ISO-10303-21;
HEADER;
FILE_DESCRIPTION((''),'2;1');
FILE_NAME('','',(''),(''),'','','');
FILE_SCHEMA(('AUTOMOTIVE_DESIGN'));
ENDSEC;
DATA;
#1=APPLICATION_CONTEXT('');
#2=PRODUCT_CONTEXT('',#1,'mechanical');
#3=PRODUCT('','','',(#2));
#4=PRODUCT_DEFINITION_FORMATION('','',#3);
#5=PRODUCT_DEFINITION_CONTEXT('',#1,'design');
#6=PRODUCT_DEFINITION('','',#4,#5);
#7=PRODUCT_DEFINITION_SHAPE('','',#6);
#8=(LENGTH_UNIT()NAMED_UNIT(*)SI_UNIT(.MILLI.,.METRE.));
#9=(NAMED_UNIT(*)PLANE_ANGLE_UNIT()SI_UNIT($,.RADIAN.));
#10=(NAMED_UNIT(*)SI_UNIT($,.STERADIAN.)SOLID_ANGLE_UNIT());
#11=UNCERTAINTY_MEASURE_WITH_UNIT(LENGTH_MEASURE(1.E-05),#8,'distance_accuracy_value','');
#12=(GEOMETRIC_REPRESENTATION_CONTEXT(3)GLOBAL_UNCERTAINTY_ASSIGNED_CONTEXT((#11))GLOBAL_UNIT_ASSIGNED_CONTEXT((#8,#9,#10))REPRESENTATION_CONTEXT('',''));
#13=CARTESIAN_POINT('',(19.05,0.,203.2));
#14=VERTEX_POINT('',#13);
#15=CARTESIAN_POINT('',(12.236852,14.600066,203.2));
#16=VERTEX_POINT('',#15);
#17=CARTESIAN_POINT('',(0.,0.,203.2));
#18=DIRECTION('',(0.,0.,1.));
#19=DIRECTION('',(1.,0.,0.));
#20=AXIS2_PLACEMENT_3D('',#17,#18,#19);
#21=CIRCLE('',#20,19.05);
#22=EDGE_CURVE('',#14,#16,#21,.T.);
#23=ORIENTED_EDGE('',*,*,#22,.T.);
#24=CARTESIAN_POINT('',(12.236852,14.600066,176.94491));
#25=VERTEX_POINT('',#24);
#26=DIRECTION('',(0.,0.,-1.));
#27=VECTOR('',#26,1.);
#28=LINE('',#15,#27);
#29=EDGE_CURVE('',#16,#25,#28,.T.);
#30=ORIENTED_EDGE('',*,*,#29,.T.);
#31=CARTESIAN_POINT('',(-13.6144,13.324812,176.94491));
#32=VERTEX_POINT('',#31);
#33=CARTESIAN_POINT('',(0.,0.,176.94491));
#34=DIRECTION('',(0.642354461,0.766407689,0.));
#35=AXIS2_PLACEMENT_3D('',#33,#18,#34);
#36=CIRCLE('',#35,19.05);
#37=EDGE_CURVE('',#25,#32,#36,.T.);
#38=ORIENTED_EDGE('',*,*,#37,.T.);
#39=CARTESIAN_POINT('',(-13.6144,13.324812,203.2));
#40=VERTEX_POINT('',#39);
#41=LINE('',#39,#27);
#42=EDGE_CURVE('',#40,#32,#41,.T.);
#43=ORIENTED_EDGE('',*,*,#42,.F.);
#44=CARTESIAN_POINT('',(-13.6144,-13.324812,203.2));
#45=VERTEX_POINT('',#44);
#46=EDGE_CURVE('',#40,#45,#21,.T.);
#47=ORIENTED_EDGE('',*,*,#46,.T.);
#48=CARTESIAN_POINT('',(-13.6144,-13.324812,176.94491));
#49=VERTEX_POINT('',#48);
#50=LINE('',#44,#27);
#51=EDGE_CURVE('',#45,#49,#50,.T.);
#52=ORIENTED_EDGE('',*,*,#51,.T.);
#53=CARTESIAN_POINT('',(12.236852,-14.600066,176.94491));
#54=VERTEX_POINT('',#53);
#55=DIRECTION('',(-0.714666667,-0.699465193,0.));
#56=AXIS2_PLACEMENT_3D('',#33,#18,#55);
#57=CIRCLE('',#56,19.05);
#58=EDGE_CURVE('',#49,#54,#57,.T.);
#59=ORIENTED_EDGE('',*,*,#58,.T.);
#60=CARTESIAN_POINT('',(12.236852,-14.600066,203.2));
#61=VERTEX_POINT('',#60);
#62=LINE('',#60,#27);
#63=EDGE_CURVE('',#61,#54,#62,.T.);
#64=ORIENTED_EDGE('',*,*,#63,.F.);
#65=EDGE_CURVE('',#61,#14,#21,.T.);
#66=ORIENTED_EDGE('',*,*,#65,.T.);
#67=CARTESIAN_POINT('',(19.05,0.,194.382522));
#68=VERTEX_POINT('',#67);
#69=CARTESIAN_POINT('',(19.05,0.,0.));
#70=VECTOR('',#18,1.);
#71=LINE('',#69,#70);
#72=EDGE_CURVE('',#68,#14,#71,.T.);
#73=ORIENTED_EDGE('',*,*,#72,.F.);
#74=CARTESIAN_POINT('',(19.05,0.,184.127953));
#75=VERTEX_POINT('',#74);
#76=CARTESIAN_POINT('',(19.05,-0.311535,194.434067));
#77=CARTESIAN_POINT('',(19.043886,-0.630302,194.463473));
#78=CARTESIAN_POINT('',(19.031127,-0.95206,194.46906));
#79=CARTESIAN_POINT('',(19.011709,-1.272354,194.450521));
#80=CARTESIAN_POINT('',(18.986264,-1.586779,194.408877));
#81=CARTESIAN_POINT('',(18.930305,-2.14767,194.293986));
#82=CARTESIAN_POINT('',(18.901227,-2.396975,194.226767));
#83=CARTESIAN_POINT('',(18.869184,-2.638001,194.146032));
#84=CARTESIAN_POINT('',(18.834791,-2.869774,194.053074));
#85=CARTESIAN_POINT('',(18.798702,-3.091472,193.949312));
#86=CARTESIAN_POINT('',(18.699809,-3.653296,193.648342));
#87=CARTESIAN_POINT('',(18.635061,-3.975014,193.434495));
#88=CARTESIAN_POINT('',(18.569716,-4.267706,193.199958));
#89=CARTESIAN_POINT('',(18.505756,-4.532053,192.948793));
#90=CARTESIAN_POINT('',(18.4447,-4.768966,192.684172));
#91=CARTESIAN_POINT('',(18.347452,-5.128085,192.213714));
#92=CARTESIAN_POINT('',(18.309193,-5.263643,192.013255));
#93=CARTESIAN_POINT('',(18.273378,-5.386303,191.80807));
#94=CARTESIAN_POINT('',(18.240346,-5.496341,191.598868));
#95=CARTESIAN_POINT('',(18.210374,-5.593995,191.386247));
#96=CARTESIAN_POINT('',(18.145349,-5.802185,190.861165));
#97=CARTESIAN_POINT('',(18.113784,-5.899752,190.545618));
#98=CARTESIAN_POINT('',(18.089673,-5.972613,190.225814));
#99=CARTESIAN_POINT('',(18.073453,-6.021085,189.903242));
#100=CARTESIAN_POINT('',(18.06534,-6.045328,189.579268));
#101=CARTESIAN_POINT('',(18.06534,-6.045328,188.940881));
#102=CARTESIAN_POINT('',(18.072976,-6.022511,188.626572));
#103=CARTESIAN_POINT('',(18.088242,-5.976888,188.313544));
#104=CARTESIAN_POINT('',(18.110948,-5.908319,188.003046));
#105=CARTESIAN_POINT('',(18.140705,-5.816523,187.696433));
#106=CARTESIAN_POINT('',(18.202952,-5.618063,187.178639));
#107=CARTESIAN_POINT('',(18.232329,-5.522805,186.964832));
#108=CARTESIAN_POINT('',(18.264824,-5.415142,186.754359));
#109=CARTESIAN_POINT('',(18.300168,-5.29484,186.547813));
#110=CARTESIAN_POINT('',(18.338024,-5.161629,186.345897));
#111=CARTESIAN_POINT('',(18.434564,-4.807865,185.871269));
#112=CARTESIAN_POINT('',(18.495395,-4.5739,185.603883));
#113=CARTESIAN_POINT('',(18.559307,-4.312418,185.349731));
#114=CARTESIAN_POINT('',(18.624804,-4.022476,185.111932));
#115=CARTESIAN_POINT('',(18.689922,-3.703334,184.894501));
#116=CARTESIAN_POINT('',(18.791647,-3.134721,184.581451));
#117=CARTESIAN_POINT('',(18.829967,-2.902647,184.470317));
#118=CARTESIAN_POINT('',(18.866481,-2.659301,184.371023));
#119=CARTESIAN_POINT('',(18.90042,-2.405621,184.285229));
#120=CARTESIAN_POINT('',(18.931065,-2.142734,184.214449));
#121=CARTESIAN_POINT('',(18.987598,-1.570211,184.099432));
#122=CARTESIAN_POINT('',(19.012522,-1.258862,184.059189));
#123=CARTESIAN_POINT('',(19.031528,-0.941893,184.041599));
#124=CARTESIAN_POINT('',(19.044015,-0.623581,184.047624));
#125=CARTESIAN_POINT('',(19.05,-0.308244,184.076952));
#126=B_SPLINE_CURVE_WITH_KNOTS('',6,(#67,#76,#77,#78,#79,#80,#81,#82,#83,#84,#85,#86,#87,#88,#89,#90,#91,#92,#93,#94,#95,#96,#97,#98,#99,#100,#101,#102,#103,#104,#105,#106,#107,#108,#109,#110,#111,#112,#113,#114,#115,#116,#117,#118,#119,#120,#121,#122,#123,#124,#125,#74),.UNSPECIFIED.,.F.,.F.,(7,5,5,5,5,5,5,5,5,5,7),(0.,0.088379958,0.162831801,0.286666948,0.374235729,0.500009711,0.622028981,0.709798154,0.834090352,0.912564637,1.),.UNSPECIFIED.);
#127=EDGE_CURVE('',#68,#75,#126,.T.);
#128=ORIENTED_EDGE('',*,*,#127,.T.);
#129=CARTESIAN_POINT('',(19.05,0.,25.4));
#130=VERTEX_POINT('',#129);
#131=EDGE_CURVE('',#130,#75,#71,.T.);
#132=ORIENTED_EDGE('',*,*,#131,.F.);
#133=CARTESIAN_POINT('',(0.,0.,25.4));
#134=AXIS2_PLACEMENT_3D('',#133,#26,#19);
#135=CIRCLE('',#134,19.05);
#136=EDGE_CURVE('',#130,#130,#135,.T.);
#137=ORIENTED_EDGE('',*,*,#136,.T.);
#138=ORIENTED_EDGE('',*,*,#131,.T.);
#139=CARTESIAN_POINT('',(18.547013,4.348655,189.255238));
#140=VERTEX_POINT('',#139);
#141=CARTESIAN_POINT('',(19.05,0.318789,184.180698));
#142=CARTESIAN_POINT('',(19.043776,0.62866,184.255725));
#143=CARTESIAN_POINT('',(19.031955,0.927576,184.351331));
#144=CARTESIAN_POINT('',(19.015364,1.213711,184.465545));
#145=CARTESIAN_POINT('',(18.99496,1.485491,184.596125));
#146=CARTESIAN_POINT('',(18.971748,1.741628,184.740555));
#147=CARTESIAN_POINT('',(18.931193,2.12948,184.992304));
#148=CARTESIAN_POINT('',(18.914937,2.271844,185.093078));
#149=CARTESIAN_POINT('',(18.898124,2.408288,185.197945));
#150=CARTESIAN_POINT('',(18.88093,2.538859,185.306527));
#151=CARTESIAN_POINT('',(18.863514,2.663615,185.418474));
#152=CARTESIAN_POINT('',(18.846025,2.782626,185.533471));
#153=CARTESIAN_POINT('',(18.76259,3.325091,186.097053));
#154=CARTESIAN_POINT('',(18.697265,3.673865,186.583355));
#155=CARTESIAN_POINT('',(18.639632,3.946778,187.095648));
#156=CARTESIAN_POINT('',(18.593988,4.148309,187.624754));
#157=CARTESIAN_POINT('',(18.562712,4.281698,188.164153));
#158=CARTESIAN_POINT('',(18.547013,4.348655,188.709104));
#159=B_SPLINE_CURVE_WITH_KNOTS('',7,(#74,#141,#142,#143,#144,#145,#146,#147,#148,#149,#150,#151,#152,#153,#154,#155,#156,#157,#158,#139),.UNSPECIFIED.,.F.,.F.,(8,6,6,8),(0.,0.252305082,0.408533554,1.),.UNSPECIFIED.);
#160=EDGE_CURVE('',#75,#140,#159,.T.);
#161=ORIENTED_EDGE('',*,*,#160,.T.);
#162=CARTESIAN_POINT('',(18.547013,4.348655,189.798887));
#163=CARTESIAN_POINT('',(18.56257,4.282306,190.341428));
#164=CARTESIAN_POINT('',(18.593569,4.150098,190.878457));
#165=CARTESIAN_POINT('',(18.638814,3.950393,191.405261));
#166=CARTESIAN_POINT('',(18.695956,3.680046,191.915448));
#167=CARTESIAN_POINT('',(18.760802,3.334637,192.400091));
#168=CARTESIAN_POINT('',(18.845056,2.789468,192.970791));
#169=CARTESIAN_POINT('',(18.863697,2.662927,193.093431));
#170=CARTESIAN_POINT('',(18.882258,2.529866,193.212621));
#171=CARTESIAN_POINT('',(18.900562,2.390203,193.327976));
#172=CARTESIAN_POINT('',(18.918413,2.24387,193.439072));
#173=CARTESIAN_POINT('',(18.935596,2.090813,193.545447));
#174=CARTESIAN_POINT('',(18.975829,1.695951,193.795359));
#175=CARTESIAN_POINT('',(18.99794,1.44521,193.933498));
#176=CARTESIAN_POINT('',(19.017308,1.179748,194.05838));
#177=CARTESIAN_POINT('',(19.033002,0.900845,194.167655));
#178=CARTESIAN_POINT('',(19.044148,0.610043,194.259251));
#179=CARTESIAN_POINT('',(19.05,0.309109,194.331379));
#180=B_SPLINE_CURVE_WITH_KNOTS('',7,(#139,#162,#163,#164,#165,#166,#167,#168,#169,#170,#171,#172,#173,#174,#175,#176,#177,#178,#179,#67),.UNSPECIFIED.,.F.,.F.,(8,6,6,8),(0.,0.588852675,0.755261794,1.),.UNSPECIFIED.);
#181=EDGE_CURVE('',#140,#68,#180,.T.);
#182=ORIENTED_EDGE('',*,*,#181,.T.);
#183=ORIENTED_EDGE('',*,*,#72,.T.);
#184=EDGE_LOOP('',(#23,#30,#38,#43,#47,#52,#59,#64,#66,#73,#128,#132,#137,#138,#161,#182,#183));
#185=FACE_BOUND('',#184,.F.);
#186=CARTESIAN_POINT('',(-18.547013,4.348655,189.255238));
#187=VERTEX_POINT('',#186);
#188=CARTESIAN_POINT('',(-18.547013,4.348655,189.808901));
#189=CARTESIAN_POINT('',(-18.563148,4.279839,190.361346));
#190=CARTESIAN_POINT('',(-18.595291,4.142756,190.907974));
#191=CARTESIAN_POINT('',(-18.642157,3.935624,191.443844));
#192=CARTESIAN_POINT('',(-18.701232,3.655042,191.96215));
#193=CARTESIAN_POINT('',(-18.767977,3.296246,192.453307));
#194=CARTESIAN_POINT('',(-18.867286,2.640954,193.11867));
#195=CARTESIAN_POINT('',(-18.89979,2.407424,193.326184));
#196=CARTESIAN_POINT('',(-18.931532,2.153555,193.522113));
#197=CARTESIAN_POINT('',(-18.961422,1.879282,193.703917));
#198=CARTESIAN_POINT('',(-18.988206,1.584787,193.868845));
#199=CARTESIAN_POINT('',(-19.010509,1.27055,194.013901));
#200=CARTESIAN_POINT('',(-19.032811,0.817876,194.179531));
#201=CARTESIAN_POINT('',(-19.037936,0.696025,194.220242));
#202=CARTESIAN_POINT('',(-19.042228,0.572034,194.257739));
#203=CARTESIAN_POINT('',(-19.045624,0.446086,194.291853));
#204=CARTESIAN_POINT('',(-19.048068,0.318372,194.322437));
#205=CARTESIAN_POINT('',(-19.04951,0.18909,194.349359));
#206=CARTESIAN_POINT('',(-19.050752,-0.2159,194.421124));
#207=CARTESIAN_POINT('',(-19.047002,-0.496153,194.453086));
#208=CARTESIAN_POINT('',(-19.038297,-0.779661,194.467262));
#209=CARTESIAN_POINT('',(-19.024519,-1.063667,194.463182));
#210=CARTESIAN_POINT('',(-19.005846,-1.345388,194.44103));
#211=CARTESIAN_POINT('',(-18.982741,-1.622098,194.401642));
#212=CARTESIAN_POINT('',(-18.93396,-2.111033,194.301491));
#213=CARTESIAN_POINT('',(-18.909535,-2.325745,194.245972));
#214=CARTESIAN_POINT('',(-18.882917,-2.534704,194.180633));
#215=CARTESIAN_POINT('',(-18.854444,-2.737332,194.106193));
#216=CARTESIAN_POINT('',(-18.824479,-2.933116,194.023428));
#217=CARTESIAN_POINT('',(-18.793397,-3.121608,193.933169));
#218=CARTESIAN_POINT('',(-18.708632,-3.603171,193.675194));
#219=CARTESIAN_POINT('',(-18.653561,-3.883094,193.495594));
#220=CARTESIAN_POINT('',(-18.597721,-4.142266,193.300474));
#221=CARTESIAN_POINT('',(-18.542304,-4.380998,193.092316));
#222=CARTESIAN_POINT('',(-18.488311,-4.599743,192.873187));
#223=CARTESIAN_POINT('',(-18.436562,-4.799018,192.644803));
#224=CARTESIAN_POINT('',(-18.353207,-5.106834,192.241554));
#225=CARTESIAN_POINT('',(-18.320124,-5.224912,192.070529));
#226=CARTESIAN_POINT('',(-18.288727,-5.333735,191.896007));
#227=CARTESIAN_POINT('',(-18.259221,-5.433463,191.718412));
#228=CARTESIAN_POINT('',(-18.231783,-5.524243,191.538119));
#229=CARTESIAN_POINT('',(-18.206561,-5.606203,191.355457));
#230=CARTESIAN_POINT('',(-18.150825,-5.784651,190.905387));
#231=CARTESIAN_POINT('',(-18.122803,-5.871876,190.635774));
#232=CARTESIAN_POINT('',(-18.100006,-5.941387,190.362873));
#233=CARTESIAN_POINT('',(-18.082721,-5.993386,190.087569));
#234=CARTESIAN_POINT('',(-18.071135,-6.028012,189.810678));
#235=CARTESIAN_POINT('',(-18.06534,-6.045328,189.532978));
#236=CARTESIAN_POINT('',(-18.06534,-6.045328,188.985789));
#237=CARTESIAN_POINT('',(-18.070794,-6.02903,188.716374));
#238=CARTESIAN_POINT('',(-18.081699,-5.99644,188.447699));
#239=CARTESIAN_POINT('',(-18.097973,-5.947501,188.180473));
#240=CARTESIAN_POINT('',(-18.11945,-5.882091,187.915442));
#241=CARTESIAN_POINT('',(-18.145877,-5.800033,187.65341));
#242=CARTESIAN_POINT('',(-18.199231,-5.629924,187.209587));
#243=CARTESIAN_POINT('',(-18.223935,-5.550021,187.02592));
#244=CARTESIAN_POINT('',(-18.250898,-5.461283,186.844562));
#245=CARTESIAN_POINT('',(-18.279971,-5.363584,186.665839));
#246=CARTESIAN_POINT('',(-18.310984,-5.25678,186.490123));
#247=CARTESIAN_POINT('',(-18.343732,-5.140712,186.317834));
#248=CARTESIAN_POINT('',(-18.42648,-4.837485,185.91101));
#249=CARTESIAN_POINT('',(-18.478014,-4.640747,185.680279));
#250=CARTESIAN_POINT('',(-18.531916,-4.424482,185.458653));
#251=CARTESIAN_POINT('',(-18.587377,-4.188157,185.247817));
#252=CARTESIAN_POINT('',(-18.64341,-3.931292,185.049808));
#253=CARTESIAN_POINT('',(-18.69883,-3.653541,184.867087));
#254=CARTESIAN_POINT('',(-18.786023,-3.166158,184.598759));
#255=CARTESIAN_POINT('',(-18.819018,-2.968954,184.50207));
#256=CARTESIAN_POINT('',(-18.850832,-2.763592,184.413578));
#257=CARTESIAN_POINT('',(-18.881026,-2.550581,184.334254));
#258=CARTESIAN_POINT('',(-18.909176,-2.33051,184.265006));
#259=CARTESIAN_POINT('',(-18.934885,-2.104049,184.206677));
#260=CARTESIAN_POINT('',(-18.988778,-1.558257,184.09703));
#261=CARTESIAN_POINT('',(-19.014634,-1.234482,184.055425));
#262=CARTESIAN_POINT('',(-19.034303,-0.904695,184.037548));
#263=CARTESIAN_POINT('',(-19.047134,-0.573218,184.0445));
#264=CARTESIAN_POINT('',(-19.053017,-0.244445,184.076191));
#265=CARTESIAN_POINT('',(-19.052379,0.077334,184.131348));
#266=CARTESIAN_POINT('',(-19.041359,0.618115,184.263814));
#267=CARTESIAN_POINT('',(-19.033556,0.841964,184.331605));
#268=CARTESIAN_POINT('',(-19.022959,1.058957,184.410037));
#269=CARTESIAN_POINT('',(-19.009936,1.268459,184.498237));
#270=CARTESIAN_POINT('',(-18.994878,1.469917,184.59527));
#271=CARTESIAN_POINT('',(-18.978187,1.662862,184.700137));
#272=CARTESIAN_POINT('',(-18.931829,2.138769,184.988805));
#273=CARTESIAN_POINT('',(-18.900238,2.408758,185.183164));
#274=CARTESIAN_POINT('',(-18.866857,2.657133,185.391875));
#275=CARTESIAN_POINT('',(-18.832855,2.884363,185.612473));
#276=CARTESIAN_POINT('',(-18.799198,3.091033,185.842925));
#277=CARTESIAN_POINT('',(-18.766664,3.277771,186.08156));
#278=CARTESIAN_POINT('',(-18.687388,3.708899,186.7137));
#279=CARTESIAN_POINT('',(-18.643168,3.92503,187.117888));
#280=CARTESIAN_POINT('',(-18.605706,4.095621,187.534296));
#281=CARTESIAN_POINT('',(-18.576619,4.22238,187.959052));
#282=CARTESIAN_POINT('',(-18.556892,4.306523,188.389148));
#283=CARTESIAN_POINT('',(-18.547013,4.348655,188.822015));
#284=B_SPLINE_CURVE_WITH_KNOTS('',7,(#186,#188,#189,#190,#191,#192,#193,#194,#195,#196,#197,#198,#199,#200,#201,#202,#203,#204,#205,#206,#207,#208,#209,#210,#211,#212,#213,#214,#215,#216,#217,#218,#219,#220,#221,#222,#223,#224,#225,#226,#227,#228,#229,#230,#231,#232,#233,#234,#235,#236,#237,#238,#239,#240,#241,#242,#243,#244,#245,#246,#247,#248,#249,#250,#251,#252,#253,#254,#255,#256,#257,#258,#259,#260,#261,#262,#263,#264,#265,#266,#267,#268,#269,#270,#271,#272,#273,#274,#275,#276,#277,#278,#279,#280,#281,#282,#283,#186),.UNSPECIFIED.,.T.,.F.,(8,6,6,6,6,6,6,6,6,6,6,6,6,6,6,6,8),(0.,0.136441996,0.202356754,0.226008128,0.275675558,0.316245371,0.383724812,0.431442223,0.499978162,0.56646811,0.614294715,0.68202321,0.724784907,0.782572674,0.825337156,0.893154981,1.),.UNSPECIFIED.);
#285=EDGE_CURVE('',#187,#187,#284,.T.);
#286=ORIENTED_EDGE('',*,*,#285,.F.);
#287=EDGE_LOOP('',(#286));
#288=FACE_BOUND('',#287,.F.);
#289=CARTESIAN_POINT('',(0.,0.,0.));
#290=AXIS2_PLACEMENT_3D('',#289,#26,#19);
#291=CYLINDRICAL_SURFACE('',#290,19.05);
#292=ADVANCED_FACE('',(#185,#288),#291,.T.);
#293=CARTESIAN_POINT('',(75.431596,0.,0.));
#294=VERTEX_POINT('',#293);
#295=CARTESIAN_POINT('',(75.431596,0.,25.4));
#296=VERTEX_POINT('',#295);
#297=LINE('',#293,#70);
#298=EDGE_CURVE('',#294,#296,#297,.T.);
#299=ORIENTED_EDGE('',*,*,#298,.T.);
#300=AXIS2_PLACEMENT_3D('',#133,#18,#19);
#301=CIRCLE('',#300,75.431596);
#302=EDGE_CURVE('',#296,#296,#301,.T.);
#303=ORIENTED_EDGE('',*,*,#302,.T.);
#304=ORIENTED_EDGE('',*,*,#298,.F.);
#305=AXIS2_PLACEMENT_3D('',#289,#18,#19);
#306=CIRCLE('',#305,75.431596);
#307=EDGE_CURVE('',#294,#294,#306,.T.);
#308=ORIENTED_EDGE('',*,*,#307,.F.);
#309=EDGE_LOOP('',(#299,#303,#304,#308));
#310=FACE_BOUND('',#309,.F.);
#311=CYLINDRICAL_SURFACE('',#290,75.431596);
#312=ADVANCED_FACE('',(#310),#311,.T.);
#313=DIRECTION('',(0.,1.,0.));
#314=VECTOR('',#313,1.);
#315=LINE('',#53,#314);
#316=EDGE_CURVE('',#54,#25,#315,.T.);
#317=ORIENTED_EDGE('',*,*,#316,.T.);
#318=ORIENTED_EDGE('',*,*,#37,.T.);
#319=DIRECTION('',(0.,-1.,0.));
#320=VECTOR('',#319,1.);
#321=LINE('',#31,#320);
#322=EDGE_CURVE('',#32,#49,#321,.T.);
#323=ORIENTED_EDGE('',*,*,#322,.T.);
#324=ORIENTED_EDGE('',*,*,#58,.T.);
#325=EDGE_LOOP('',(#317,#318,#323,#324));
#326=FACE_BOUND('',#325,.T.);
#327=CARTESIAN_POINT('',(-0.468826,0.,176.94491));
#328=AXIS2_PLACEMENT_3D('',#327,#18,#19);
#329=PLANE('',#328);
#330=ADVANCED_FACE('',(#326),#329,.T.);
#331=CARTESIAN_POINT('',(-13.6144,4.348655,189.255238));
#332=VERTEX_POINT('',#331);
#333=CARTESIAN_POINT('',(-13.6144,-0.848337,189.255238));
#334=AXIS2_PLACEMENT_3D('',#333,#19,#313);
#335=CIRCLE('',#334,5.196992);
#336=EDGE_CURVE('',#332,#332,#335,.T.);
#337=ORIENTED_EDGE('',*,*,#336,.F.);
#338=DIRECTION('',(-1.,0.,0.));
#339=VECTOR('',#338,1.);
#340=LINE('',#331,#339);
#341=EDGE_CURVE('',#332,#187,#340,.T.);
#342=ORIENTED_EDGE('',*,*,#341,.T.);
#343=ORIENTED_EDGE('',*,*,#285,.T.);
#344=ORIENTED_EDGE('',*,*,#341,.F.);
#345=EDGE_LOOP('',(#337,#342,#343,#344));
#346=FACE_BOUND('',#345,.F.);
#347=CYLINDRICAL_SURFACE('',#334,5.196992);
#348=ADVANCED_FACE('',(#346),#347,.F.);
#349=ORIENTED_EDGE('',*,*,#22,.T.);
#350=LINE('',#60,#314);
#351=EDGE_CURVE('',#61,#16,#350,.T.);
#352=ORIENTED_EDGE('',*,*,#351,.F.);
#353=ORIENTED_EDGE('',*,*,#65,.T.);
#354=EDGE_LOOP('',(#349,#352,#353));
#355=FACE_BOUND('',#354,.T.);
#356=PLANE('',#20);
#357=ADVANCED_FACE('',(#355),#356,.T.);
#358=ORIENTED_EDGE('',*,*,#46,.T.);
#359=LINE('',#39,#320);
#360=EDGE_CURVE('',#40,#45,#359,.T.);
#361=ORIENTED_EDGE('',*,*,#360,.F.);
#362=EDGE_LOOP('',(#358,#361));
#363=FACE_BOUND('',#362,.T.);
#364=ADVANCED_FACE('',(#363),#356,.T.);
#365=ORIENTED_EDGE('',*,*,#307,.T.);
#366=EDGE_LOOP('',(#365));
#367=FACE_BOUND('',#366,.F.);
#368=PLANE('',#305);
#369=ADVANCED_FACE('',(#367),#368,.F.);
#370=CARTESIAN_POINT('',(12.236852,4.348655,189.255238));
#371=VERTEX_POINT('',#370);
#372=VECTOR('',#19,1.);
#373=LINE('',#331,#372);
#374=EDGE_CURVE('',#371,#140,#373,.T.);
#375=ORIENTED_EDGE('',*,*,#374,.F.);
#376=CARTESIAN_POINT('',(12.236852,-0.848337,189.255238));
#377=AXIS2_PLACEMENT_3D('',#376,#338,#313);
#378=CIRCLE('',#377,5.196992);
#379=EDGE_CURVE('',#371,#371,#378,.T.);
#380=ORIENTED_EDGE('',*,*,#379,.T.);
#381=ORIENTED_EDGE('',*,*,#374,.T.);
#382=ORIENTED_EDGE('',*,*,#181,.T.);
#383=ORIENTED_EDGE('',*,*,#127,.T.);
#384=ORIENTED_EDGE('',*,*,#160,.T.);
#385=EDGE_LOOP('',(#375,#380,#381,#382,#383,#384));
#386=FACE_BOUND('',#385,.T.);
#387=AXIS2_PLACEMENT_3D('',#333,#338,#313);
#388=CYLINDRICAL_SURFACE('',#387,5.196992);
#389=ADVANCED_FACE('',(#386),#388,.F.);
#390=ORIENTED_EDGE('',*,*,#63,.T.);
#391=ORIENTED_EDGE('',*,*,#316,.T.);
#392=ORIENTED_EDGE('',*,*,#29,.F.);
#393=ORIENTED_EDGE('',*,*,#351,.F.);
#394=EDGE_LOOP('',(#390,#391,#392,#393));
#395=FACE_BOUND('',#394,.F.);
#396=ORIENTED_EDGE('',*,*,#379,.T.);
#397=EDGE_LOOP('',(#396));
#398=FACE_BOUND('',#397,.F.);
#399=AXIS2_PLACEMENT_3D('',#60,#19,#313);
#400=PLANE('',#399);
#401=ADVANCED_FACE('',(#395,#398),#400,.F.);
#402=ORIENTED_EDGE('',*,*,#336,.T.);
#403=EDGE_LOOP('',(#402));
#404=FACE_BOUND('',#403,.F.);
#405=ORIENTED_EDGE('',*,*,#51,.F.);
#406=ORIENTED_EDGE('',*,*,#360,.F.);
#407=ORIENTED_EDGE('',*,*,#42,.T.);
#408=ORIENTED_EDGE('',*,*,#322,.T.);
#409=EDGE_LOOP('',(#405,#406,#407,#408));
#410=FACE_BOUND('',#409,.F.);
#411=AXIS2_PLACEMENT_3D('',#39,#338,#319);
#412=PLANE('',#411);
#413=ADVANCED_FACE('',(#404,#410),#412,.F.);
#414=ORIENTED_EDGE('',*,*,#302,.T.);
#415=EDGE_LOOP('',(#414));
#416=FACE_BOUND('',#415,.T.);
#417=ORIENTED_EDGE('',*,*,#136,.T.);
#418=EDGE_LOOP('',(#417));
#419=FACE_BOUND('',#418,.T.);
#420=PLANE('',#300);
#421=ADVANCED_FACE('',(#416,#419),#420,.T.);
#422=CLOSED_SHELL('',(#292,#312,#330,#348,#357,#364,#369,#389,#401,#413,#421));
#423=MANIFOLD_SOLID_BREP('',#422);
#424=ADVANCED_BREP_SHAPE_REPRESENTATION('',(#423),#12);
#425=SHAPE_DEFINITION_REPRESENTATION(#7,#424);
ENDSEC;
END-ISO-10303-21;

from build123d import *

# Parameters (mm, degrees)
F0_R     = 75.4315959701
F1_DEPTH = 25.4
F10_R    = 19.05
F2_DEPTH = 203.2
F4_DEPTH = 26.25509
F5_R     = 5.3383463792
F6_DEPTH = 25.4
F7_R     = 5.1969918097
F8_DEPTH = 22.39609
F9_DEPTH = 72.38519


# Not quite as in the source:
# - a feature names something its author has since deleted; it is built from what else it names


with BuildPart() as f1:
    # F0 (on Top) → F1 (new body)
    with BuildSketch(Plane.XY):
        Circle(F0_R)
    extrude(amount=F1_DEPTH)

    # F10 (on Top) → F2 (join)
    with BuildSketch(Plane.XY):
        Circle(F10_R)
    extrude(amount=F2_DEPTH)

    # F3 (on face) → F4 (cut)
    with BuildSketch(Plane.XY.offset(203.2)):
        with BuildLine():
            ThreePointArc((12.2368524888, 14.6000664782), (-0.9386041951, 19.026863172), (-13.6144, 13.3248119176))
            Line((-13.6144, 13.3248119176), (-13.6144, -13.3248119176))
            ThreePointArc((-13.6144, -13.3248119176), (-0.9386041951, -19.026863172), (12.2368524888, -14.6000664782))
            Line((12.2368524888, -14.6000664782), (12.2368524888, 14.6000664782))
        make_face()
    extrude(amount=-F4_DEPTH, mode=Mode.SUBTRACT)

    # F5 (on face) → F6 (cut)
    with BuildSketch(Plane.YZ.offset(-13.6144)):
        with Locations((-189.9197250605, 0)):
            Circle(F5_R)
    extrude(amount=-F6_DEPTH, mode=Mode.SUBTRACT)

    # F7 (on face) → F8 (cut)
    with BuildSketch(Plane.YZ.offset(-13.6144)):
        with Locations((-0.8483366109, 189.2552375793)):
            Circle(F7_R)
    extrude(amount=-F8_DEPTH, mode=Mode.SUBTRACT)

    # F7 (on face) → F9 (cut)
    with BuildSketch(Plane.YZ.offset(-13.6144)):
        with Locations((-0.8483366109, 189.2552375793)):
            Circle(F7_R)
    extrude(amount=F9_DEPTH, mode=Mode.SUBTRACT)


solid = f1.part
